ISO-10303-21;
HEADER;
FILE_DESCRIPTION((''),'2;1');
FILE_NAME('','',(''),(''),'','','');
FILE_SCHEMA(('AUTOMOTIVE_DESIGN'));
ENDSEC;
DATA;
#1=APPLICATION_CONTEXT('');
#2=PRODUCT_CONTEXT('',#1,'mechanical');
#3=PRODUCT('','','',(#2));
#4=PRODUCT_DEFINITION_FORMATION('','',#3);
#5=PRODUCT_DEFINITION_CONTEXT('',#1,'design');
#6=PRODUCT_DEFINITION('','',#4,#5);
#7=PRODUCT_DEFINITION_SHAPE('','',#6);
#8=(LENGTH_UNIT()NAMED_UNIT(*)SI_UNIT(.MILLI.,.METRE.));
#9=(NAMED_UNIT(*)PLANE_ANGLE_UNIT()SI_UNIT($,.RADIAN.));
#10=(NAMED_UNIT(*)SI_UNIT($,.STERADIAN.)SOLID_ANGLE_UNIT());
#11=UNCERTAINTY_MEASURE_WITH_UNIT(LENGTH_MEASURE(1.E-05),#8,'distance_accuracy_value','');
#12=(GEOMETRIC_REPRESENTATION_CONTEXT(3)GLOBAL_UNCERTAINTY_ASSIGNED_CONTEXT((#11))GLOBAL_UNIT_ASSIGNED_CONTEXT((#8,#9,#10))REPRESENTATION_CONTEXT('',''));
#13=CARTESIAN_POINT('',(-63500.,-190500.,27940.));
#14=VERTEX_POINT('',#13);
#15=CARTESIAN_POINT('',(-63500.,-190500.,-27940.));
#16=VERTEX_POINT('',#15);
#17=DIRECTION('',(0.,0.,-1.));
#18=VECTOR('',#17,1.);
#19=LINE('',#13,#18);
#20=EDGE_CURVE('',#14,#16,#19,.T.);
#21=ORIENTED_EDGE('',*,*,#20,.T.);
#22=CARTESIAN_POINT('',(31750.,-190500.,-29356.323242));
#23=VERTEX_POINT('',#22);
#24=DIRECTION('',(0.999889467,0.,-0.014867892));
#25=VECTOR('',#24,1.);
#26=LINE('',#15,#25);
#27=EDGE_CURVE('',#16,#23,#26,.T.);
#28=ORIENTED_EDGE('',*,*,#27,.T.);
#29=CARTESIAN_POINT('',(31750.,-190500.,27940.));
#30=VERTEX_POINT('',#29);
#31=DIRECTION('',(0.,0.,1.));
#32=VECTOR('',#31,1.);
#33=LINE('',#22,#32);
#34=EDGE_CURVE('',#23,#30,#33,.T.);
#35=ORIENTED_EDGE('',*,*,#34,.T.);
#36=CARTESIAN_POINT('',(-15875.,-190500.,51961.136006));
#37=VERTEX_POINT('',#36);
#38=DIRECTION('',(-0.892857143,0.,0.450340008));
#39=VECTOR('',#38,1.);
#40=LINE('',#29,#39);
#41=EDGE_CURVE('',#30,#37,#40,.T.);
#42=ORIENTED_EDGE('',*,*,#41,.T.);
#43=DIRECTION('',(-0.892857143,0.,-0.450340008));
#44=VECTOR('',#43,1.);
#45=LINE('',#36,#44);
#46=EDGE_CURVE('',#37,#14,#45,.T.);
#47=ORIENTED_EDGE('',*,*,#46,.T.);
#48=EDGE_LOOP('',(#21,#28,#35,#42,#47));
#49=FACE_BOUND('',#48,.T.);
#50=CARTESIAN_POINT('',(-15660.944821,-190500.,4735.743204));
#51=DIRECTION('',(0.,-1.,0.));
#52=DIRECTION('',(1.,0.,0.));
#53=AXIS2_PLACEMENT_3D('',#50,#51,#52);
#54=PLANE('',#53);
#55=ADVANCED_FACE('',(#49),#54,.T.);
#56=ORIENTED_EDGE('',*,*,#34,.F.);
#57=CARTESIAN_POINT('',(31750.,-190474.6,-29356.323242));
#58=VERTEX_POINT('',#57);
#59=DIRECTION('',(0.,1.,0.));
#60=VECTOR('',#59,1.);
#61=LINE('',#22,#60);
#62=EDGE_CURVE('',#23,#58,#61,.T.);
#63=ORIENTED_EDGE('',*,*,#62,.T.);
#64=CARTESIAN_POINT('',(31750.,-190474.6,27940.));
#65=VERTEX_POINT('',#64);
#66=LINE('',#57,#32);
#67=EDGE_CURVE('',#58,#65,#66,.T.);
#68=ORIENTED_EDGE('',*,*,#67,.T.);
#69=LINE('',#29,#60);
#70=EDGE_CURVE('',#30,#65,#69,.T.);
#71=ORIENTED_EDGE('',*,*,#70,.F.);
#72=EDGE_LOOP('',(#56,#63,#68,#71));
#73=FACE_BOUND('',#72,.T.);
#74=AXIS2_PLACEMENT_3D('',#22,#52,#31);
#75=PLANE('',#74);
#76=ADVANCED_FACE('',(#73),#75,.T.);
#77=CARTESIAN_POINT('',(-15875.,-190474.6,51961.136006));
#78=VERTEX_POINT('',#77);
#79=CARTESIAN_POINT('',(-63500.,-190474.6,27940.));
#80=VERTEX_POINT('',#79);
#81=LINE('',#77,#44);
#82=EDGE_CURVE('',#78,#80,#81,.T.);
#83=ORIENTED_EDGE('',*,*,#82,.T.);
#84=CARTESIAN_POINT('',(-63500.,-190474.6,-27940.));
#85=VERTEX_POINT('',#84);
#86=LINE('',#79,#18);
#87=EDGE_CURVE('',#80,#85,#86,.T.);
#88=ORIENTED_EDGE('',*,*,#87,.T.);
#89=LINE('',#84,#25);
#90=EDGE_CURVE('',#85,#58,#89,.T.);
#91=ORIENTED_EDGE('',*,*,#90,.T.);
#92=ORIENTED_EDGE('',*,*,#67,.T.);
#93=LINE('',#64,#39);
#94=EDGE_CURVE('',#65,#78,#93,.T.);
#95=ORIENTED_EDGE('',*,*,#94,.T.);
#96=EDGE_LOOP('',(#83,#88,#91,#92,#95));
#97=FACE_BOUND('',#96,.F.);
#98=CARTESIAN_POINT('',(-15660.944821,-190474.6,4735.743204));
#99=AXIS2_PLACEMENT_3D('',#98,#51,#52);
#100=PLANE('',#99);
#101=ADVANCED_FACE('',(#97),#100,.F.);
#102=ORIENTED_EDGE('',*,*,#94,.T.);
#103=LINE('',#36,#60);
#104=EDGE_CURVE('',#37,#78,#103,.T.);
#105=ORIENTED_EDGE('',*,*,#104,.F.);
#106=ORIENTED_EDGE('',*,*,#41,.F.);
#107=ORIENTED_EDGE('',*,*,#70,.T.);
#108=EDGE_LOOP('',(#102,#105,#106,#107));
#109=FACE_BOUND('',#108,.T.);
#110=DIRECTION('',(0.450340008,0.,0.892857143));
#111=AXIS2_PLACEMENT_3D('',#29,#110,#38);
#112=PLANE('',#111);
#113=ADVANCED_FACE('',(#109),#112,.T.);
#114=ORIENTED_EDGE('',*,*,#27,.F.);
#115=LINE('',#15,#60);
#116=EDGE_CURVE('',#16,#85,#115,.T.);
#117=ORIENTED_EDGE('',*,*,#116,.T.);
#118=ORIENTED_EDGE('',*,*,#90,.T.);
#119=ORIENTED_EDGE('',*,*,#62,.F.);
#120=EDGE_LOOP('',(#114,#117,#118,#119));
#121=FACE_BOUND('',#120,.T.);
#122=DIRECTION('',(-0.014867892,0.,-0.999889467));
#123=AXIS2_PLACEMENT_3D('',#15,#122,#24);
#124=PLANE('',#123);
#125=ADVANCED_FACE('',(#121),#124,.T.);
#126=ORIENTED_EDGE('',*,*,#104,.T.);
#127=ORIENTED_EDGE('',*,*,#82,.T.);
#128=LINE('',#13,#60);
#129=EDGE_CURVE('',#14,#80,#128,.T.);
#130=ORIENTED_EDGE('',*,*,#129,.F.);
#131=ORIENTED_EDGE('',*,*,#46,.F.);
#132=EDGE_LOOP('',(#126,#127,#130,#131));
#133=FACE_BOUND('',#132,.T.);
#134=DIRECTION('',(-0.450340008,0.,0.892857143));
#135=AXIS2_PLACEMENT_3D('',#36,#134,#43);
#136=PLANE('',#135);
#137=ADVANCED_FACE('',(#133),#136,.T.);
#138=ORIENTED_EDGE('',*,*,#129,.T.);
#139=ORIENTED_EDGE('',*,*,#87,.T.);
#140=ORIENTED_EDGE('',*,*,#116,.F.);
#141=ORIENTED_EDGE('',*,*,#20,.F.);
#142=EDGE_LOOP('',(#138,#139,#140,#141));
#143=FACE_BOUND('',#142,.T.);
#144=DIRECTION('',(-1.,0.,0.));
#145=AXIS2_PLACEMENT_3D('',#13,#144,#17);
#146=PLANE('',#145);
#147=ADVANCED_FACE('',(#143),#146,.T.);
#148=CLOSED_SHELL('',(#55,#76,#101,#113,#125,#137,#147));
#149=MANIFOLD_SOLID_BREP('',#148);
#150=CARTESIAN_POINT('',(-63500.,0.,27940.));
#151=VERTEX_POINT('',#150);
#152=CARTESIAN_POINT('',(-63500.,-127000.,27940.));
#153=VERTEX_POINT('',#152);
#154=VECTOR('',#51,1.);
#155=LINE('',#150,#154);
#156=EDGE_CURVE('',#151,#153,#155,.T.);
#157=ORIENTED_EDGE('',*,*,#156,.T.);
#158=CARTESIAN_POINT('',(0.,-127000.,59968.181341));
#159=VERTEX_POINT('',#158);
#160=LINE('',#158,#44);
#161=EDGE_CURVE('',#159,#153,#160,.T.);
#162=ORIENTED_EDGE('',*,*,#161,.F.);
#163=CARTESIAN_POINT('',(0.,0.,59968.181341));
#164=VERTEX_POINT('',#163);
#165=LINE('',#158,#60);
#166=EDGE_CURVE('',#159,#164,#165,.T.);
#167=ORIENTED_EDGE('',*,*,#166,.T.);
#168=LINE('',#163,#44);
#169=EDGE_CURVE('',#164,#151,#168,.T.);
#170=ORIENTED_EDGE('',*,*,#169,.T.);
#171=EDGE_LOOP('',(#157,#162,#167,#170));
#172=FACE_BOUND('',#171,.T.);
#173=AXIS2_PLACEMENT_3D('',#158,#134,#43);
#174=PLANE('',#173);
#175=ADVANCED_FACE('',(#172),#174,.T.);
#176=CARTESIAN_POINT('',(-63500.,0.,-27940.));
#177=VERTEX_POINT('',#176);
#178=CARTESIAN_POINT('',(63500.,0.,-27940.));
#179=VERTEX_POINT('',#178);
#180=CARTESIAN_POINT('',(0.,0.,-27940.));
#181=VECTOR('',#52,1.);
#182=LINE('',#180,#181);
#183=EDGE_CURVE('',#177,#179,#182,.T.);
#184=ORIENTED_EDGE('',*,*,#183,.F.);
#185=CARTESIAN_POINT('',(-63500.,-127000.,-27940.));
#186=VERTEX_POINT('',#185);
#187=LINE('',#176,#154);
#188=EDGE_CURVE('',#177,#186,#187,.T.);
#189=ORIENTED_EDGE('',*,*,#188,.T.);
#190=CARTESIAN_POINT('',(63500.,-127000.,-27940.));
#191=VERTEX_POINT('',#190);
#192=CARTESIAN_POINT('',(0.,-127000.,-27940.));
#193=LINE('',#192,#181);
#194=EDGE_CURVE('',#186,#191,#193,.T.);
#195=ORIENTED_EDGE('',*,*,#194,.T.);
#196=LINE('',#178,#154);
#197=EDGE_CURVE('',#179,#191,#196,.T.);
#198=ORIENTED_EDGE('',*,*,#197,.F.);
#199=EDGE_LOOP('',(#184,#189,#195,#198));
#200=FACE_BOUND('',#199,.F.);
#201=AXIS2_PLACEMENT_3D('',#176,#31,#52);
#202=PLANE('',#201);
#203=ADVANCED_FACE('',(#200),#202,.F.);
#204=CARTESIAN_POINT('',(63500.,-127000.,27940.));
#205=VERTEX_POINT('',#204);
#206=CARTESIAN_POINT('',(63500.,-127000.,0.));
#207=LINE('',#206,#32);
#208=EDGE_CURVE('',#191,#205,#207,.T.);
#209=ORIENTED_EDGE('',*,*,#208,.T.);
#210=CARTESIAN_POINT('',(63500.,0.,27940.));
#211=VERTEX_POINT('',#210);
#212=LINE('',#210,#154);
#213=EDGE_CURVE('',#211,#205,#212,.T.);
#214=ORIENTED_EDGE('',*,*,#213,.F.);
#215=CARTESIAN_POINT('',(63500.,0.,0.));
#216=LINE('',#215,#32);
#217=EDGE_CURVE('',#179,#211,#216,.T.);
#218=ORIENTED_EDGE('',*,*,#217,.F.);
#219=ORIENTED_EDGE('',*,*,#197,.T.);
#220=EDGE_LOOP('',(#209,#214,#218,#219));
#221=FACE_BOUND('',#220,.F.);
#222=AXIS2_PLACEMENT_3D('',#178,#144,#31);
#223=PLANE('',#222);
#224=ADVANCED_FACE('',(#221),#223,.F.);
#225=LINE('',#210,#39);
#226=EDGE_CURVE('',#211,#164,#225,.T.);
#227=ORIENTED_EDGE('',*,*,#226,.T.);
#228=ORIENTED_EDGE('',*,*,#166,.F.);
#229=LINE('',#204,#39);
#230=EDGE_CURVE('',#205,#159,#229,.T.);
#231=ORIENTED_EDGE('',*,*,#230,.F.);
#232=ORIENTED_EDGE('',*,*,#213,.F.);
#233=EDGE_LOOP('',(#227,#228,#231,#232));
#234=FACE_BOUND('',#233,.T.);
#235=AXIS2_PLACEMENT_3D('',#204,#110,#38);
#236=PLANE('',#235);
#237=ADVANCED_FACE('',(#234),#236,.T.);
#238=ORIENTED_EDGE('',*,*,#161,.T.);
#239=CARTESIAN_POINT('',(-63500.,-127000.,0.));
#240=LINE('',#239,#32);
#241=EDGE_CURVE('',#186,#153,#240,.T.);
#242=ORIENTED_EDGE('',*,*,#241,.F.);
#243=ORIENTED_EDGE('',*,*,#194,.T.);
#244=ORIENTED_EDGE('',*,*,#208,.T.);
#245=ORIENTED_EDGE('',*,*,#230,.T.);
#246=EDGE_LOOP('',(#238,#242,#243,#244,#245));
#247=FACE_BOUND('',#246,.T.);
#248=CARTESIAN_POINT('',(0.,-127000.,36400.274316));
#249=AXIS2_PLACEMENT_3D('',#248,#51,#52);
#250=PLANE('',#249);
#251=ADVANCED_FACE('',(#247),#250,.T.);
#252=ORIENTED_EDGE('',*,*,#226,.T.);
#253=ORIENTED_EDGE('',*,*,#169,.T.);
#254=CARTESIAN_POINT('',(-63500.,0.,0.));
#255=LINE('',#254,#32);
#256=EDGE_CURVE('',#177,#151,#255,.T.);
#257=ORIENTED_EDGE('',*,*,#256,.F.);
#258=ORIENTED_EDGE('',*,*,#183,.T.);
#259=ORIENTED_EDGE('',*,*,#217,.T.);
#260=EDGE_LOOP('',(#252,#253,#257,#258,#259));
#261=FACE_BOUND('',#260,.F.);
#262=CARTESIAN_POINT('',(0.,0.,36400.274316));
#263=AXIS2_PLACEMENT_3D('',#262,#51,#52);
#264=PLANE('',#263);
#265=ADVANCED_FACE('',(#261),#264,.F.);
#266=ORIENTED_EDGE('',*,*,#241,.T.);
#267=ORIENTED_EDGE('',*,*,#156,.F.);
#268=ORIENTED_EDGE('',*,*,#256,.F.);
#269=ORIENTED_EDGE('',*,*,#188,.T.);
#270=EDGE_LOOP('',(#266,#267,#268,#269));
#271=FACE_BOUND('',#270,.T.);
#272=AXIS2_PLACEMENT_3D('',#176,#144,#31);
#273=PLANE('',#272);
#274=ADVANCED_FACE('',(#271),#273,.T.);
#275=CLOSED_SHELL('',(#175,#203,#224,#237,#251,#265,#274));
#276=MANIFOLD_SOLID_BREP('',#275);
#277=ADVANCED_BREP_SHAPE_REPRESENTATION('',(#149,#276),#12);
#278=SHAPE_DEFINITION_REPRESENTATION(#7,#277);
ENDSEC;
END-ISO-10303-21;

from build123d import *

# Parameters (mm, degrees)
F0_W     = 127000
F0_H     = 55880
F1_DEPTH = 127000
F3_DEPTH = 127000
F8_DEPTH = 25.4


# Not quite as in the source:
# - the program builds the solid bodies; features that only make, move or delete a surface that nothing else refers to are left out


with BuildPart() as f1:
    # F0 (on Front) → F1 (new body)
    with BuildSketch(Plane.XZ):
        Rectangle(F0_W, F0_H)
    extrude(amount=F1_DEPTH)

    # F2 (on face) → F3 (join)
    with BuildSketch(Plane.XZ.offset(127000)):
        Polygon((0, 59968.181340813), (-63500, 27940), (63500, 27940), align=None)
    extrude(amount=-F3_DEPTH)


with BuildPart() as f8:
    # F7 (on offset) → F8 (new body)
    with BuildSketch(Plane.XZ.offset(190500)):
        Polygon((-15875, 51961.1360056098), (-63500, 27940), (-63500, -27940), (31750, -29356.3232421875), (31750, 27940), align=None)
    extrude(amount=-F8_DEPTH)


solid = Compound([f1.part, f8.part])
